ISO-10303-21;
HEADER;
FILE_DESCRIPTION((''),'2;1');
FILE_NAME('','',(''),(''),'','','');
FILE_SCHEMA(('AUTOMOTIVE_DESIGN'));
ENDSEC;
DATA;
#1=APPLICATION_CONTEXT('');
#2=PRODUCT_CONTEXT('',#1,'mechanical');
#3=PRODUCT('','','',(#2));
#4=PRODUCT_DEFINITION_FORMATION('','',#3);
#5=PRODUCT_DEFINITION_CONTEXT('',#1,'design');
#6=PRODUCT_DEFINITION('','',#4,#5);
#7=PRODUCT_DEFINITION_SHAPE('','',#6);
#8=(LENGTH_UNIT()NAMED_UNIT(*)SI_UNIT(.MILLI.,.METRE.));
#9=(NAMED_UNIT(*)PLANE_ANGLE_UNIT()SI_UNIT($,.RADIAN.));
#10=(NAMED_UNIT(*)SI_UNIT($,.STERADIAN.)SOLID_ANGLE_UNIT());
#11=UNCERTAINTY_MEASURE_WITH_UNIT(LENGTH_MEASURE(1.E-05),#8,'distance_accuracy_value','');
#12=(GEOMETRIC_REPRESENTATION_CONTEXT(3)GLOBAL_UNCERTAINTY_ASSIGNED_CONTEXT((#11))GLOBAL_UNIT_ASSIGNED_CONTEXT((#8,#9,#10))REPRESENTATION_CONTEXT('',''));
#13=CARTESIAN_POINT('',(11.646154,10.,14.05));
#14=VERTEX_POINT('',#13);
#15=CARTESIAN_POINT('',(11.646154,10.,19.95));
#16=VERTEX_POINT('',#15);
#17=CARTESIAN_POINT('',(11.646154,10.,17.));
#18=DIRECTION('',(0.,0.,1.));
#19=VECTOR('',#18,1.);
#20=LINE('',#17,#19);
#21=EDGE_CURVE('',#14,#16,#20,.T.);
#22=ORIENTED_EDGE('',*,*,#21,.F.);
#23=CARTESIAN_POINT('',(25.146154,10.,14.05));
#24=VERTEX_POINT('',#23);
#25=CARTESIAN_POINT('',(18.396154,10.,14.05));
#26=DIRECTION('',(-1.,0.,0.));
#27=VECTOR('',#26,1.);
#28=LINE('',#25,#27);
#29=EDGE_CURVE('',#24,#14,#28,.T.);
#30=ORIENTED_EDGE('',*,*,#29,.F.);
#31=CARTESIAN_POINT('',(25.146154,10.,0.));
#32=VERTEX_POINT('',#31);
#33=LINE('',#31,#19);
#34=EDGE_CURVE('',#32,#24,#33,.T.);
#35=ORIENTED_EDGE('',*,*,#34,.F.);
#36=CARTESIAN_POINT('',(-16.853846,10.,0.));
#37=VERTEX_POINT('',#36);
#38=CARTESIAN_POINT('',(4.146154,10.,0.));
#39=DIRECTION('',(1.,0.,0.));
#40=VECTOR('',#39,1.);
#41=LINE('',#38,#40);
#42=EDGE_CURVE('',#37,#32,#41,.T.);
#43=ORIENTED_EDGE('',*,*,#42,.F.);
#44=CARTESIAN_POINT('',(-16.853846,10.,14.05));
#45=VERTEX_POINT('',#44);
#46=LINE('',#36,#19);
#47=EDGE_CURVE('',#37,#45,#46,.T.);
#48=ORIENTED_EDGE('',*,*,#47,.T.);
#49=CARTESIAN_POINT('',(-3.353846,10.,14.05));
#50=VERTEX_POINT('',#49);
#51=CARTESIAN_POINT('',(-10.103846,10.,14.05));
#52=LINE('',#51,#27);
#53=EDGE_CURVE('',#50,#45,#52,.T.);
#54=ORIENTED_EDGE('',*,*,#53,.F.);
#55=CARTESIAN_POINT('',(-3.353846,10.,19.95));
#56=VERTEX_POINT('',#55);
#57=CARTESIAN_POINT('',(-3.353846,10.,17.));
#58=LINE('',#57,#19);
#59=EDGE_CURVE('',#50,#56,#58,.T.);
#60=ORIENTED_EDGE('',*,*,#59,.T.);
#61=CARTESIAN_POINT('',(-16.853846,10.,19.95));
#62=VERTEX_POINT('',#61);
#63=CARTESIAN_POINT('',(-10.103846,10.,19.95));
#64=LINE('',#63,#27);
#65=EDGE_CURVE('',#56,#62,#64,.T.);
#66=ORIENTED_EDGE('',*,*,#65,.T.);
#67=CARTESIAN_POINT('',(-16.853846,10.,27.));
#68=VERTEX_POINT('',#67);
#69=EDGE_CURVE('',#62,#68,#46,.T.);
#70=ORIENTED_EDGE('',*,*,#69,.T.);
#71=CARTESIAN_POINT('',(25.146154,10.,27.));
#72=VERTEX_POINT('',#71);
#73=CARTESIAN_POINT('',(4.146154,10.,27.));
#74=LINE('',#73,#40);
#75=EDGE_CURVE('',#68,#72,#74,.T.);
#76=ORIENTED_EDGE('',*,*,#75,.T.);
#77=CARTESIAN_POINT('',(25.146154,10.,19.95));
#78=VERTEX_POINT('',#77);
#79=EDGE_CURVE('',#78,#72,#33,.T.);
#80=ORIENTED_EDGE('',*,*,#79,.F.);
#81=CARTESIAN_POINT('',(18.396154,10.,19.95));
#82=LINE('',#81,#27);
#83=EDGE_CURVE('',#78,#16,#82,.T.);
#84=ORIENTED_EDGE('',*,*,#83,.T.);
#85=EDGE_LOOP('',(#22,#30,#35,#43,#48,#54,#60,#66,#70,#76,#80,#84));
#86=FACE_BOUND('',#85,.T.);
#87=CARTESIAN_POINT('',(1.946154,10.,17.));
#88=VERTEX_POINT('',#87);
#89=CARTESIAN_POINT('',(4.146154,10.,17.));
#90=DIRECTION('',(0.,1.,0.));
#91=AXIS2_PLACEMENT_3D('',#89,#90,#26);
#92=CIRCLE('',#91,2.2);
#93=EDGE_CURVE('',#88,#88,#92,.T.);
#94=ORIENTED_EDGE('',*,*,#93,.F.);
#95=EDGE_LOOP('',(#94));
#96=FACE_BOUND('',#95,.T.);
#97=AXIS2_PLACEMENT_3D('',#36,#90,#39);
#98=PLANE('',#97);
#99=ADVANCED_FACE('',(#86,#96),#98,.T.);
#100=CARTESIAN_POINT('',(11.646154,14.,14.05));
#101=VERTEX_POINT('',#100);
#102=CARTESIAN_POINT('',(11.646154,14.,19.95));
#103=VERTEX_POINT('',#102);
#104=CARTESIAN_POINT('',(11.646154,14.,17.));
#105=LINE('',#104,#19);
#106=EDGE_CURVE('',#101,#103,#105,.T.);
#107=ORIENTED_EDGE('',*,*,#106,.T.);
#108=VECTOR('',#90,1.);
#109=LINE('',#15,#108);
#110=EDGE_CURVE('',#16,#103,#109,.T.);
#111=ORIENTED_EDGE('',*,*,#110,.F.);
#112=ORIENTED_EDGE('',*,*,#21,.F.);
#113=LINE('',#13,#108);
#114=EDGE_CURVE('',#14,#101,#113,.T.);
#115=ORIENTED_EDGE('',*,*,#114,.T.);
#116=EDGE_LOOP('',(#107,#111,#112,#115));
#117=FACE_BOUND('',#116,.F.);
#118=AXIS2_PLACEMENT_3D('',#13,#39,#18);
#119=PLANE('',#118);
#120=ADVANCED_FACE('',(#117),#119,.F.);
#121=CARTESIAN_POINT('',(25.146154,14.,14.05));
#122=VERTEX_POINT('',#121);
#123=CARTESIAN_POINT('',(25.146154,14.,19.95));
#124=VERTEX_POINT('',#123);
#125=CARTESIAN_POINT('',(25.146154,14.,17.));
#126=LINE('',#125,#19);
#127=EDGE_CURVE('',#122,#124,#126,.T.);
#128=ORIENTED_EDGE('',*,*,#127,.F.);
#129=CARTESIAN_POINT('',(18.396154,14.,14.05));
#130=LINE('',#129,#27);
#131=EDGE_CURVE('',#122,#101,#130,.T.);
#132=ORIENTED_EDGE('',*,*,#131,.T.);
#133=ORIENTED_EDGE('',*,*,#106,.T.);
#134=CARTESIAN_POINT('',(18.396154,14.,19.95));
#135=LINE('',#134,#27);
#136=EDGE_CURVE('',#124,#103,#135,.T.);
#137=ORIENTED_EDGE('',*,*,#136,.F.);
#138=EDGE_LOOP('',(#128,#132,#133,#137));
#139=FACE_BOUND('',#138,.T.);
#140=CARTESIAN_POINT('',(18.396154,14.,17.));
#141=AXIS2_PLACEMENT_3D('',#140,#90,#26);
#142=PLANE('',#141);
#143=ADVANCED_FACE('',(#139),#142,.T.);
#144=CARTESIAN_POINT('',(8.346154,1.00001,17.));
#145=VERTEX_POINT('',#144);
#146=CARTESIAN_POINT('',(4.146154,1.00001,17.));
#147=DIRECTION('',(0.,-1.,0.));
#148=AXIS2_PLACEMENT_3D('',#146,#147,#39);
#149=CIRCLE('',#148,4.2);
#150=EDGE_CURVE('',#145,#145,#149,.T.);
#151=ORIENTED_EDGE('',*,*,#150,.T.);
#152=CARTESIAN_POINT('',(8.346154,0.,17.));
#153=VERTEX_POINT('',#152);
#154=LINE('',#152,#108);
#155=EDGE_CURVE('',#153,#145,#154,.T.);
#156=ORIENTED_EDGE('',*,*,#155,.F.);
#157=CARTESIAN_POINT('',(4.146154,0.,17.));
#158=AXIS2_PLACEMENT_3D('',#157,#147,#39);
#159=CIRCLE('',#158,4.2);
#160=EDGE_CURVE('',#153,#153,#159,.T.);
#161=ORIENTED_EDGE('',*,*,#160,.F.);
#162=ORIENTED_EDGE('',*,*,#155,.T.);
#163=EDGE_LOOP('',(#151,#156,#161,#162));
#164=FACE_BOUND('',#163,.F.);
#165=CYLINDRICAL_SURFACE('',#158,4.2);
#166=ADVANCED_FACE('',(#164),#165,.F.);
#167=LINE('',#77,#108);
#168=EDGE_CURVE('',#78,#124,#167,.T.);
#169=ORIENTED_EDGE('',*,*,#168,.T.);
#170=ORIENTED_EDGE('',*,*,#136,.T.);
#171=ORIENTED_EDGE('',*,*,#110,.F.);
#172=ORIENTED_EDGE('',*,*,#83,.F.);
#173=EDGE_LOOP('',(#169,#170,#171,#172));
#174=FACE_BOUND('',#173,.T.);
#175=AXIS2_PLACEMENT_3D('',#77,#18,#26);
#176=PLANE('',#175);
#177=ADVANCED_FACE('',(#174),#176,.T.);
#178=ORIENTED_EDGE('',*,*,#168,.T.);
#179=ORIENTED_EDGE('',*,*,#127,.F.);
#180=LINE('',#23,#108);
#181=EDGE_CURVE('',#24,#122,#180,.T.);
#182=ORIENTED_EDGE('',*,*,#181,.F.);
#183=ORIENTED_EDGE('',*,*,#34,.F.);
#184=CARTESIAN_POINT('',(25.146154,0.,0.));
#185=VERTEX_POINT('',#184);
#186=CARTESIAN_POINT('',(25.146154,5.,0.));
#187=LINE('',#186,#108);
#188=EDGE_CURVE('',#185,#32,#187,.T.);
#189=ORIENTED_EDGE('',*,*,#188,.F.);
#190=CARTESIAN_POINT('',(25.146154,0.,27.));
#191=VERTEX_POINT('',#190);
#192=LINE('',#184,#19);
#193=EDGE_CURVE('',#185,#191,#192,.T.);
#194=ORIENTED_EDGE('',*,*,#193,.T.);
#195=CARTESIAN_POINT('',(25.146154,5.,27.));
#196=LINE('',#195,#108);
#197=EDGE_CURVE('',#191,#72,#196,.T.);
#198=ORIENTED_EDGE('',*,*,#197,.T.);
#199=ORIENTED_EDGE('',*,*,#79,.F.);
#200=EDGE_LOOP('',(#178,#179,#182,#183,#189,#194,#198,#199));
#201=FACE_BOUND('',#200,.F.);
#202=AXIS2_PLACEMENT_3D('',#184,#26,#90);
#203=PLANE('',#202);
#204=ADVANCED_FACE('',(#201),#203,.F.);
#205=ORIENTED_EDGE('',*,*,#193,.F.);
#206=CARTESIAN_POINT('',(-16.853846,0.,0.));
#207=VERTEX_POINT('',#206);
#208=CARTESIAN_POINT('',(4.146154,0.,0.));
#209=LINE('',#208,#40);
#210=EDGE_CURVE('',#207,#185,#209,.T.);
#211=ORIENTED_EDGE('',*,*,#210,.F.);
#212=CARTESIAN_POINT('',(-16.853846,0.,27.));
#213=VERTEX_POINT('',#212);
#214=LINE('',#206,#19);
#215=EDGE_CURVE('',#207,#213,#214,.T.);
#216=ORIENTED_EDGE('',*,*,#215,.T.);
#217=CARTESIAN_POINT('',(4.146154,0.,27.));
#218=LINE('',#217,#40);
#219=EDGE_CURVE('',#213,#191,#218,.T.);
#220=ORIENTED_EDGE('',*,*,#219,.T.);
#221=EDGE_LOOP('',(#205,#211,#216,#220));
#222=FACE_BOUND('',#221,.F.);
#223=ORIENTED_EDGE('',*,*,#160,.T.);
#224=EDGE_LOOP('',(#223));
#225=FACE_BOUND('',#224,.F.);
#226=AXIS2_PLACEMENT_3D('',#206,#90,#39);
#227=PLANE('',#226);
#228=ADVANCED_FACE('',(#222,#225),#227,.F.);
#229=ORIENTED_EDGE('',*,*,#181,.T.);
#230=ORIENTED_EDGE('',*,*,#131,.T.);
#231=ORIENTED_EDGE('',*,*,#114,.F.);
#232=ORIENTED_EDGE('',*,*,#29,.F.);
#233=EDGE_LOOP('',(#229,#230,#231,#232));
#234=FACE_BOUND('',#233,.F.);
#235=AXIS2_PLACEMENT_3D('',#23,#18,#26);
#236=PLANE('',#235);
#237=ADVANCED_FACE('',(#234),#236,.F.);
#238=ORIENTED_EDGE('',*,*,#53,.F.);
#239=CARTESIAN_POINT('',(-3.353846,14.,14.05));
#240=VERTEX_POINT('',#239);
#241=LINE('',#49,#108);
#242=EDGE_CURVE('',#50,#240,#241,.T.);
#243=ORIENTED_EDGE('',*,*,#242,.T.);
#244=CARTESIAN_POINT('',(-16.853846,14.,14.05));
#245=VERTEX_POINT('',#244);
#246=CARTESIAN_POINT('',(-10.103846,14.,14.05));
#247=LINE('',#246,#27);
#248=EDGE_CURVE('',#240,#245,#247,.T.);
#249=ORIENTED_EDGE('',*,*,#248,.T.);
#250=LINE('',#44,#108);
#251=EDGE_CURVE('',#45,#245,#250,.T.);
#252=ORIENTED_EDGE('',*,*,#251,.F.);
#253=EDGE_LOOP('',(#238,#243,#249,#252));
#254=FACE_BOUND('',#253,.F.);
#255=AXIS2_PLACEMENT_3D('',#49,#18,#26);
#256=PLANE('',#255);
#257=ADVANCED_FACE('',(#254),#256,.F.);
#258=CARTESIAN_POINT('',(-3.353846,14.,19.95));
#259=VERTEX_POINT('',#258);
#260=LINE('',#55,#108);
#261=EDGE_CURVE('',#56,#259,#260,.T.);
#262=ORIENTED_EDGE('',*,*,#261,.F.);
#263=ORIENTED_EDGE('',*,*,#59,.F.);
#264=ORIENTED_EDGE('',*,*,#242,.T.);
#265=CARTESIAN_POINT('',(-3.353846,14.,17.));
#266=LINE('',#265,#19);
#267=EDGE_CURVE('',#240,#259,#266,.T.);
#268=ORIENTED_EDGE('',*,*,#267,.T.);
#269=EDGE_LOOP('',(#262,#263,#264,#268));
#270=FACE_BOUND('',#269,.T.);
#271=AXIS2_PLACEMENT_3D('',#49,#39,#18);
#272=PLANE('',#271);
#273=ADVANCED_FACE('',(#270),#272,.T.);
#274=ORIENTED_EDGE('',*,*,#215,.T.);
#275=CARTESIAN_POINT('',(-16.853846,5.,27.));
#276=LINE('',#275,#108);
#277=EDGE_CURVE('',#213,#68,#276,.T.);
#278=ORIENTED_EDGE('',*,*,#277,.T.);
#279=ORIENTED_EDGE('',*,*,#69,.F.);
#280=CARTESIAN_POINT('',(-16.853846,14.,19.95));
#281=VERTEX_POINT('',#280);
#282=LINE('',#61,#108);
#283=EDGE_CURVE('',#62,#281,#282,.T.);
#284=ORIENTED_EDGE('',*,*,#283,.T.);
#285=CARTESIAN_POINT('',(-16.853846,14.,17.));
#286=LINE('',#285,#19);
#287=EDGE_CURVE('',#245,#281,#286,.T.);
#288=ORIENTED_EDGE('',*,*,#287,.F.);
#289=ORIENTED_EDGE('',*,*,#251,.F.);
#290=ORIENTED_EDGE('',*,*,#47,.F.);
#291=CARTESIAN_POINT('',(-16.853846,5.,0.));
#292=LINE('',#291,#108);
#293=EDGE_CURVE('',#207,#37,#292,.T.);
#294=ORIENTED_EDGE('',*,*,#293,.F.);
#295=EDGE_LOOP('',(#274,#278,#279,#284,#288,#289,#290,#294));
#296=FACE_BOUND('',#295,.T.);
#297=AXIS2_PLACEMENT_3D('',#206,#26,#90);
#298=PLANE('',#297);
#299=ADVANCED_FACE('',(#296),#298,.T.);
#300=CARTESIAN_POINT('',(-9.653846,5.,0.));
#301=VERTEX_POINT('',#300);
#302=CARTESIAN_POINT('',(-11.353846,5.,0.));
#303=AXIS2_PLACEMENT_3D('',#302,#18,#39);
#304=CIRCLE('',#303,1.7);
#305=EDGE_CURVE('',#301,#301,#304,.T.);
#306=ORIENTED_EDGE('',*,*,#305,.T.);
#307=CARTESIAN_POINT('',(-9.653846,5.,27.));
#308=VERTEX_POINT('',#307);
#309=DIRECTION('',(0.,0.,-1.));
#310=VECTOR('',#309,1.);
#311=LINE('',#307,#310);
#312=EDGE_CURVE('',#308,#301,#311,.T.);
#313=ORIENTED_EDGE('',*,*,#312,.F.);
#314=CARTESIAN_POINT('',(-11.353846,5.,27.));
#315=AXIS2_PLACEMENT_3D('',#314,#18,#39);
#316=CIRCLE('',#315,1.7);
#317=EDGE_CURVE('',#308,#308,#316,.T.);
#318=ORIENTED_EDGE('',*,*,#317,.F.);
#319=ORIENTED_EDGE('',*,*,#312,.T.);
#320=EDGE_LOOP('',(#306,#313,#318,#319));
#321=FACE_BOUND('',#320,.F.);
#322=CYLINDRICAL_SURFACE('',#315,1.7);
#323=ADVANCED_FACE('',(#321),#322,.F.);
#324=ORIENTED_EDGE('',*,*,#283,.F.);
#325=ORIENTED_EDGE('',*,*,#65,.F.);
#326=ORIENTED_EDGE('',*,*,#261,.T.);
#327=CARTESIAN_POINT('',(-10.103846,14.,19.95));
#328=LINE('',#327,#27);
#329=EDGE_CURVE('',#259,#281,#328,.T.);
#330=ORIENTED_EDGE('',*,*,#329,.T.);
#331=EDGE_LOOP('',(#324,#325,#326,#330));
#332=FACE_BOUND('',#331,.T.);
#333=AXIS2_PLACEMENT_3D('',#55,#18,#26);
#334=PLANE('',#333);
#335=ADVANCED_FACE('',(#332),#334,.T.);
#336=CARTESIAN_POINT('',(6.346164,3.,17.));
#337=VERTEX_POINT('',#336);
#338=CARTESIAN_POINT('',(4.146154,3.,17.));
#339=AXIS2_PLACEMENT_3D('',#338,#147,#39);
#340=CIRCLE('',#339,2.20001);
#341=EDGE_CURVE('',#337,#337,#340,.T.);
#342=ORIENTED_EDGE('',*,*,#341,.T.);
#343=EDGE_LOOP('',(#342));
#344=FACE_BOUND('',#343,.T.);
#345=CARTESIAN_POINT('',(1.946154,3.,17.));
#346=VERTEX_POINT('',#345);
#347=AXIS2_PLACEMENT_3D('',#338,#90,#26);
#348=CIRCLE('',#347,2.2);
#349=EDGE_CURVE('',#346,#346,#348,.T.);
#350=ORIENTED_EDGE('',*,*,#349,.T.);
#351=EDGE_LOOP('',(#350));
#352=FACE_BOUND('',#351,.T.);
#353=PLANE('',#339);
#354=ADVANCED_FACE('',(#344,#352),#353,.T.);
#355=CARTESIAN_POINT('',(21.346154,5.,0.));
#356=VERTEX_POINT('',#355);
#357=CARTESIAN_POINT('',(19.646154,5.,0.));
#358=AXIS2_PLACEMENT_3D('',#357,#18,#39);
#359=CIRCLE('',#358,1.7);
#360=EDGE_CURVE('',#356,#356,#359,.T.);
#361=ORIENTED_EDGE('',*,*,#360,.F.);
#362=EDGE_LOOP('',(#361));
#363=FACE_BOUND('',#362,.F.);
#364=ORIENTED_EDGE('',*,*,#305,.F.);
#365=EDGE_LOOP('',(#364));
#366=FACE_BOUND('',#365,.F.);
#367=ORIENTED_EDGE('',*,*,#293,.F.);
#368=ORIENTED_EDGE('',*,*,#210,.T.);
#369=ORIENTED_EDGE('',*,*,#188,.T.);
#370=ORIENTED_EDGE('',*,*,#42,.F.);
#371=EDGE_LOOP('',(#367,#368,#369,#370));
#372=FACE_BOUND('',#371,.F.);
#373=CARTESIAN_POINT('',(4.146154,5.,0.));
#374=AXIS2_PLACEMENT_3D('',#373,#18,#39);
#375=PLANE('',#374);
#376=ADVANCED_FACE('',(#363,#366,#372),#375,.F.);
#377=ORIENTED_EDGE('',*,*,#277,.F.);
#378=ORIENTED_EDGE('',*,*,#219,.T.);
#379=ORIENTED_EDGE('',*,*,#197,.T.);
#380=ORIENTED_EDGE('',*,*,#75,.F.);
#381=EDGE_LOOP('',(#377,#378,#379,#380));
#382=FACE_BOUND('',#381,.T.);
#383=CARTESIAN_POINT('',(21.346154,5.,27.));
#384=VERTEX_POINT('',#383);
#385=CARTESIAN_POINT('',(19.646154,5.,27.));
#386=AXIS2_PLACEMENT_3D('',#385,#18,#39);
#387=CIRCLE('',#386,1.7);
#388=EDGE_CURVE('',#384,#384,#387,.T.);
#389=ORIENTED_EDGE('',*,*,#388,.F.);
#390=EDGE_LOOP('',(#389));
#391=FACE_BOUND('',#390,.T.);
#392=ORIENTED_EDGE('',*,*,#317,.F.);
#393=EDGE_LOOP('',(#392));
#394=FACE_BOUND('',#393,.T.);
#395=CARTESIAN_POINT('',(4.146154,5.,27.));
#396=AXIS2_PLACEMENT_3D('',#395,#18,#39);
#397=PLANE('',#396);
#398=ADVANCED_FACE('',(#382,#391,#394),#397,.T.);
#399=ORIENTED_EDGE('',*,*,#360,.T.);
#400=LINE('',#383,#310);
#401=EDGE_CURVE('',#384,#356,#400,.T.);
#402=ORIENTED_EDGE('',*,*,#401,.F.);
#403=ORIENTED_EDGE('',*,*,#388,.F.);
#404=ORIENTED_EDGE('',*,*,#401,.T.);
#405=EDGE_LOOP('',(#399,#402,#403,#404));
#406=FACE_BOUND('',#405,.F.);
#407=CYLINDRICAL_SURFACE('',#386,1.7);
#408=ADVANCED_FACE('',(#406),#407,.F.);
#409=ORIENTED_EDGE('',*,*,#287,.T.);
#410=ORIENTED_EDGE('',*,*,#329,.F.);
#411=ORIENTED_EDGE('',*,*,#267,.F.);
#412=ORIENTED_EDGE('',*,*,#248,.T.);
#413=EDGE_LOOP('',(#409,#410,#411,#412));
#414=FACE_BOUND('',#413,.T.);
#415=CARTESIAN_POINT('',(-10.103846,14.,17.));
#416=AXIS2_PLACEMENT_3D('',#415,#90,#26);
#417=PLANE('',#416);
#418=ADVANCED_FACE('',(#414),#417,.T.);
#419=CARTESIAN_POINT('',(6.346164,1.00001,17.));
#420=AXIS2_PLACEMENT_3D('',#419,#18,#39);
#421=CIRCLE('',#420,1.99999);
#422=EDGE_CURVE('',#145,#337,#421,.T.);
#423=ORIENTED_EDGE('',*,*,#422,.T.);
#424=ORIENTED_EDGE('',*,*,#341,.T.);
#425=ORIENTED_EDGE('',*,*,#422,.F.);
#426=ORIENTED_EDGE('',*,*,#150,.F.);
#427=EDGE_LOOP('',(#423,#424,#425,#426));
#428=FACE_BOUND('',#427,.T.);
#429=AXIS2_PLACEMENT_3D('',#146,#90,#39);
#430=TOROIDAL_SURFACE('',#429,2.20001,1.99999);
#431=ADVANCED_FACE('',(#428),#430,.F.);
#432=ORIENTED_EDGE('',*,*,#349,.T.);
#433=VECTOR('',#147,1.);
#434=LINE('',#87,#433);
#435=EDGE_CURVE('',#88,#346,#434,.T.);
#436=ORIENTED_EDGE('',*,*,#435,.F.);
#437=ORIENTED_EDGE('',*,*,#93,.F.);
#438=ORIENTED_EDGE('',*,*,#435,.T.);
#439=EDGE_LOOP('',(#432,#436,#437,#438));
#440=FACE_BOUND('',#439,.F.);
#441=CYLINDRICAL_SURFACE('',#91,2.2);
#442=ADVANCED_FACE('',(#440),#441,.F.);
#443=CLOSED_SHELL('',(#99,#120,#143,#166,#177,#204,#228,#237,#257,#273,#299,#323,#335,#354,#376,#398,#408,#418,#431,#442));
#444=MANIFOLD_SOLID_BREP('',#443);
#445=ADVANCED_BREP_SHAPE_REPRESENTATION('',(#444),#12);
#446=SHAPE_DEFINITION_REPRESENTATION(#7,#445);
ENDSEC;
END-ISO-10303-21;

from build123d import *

# Parameters (mm, degrees)
F0_W     = 42
F0_H     = 10
F1_DEPTH = 27
F2_R     = 1.7
F3_DEPTH = 27.001
F4_W     = 13.5
F4_H     = 5.9
F5_DEPTH = 4
F4_R     = 2.2
F6_DEPTH = 25
F7_R     = 4.2
F8_DEPTH = 3
F9_R     = 1.99999


# Not quite as in the source:
# - a fillet or chamfer is up to 0.001 mm smaller than in the source, because OpenCascade refuses the exact size


with BuildPart() as f1:
    # F0 (on Top) → F1 (new body)
    with BuildSketch(Plane.XY):
        with Locations((4.146153807, 5)):
            Rectangle(F0_W, F0_H)
    extrude(amount=F1_DEPTH)

    # F2 (on face) → F3 (cut, through all)
    with BuildSketch(Plane.XY.offset(27)):
        with BuildLine():
            ThreePointArc((-13.053846193, 5), (-11.353846193, 3.3), (-9.653846193, 5))
            ThreePointArc((-9.653846193, 5), (-11.353846193, 6.7), (-13.053846193, 5))
        make_face()
        with Locations((19.646153807, 5)):
            Circle(F2_R)
    extrude(amount=-F3_DEPTH, mode=Mode.SUBTRACT)

    # F4 (on face) → F5 (join)
    with BuildSketch(Plane(origin=(0, 10, 0), x_dir=(-1, 0, 0), z_dir=(0, 1, 0))):
        with Locations((-18.396153807, 17)):
            Rectangle(F4_W, F4_H)
        with Locations((10.103846193, 17)):
            Rectangle(F4_W, F4_H)
    extrude(amount=F5_DEPTH)

    # F4 (on face) → F6 (cut)
    with BuildSketch(Plane(origin=(0, 10, 0), x_dir=(-1, 0, 0), z_dir=(0, 1, 0))):
        with Locations((-4.146153807, 17)):
            Circle(F4_R)
    extrude(amount=-F6_DEPTH, mode=Mode.SUBTRACT)

    # F7 (on face) → F8 (cut)
    with BuildSketch(Plane.XZ):
        with Locations((4.146153807, 17)):
            Circle(F7_R)
    extrude(amount=-F8_DEPTH, mode=Mode.SUBTRACT)

    # F9 (radius 2 in the source; OpenCascade refuses exactly that, so slightly less here)
    f9_edges = [f1.edges().sort_by_distance(p)[0] for p in [
        (-0.053846, 3, 17),
    ]]
    fillet(f9_edges, radius=F9_R)


solid = f1.part
